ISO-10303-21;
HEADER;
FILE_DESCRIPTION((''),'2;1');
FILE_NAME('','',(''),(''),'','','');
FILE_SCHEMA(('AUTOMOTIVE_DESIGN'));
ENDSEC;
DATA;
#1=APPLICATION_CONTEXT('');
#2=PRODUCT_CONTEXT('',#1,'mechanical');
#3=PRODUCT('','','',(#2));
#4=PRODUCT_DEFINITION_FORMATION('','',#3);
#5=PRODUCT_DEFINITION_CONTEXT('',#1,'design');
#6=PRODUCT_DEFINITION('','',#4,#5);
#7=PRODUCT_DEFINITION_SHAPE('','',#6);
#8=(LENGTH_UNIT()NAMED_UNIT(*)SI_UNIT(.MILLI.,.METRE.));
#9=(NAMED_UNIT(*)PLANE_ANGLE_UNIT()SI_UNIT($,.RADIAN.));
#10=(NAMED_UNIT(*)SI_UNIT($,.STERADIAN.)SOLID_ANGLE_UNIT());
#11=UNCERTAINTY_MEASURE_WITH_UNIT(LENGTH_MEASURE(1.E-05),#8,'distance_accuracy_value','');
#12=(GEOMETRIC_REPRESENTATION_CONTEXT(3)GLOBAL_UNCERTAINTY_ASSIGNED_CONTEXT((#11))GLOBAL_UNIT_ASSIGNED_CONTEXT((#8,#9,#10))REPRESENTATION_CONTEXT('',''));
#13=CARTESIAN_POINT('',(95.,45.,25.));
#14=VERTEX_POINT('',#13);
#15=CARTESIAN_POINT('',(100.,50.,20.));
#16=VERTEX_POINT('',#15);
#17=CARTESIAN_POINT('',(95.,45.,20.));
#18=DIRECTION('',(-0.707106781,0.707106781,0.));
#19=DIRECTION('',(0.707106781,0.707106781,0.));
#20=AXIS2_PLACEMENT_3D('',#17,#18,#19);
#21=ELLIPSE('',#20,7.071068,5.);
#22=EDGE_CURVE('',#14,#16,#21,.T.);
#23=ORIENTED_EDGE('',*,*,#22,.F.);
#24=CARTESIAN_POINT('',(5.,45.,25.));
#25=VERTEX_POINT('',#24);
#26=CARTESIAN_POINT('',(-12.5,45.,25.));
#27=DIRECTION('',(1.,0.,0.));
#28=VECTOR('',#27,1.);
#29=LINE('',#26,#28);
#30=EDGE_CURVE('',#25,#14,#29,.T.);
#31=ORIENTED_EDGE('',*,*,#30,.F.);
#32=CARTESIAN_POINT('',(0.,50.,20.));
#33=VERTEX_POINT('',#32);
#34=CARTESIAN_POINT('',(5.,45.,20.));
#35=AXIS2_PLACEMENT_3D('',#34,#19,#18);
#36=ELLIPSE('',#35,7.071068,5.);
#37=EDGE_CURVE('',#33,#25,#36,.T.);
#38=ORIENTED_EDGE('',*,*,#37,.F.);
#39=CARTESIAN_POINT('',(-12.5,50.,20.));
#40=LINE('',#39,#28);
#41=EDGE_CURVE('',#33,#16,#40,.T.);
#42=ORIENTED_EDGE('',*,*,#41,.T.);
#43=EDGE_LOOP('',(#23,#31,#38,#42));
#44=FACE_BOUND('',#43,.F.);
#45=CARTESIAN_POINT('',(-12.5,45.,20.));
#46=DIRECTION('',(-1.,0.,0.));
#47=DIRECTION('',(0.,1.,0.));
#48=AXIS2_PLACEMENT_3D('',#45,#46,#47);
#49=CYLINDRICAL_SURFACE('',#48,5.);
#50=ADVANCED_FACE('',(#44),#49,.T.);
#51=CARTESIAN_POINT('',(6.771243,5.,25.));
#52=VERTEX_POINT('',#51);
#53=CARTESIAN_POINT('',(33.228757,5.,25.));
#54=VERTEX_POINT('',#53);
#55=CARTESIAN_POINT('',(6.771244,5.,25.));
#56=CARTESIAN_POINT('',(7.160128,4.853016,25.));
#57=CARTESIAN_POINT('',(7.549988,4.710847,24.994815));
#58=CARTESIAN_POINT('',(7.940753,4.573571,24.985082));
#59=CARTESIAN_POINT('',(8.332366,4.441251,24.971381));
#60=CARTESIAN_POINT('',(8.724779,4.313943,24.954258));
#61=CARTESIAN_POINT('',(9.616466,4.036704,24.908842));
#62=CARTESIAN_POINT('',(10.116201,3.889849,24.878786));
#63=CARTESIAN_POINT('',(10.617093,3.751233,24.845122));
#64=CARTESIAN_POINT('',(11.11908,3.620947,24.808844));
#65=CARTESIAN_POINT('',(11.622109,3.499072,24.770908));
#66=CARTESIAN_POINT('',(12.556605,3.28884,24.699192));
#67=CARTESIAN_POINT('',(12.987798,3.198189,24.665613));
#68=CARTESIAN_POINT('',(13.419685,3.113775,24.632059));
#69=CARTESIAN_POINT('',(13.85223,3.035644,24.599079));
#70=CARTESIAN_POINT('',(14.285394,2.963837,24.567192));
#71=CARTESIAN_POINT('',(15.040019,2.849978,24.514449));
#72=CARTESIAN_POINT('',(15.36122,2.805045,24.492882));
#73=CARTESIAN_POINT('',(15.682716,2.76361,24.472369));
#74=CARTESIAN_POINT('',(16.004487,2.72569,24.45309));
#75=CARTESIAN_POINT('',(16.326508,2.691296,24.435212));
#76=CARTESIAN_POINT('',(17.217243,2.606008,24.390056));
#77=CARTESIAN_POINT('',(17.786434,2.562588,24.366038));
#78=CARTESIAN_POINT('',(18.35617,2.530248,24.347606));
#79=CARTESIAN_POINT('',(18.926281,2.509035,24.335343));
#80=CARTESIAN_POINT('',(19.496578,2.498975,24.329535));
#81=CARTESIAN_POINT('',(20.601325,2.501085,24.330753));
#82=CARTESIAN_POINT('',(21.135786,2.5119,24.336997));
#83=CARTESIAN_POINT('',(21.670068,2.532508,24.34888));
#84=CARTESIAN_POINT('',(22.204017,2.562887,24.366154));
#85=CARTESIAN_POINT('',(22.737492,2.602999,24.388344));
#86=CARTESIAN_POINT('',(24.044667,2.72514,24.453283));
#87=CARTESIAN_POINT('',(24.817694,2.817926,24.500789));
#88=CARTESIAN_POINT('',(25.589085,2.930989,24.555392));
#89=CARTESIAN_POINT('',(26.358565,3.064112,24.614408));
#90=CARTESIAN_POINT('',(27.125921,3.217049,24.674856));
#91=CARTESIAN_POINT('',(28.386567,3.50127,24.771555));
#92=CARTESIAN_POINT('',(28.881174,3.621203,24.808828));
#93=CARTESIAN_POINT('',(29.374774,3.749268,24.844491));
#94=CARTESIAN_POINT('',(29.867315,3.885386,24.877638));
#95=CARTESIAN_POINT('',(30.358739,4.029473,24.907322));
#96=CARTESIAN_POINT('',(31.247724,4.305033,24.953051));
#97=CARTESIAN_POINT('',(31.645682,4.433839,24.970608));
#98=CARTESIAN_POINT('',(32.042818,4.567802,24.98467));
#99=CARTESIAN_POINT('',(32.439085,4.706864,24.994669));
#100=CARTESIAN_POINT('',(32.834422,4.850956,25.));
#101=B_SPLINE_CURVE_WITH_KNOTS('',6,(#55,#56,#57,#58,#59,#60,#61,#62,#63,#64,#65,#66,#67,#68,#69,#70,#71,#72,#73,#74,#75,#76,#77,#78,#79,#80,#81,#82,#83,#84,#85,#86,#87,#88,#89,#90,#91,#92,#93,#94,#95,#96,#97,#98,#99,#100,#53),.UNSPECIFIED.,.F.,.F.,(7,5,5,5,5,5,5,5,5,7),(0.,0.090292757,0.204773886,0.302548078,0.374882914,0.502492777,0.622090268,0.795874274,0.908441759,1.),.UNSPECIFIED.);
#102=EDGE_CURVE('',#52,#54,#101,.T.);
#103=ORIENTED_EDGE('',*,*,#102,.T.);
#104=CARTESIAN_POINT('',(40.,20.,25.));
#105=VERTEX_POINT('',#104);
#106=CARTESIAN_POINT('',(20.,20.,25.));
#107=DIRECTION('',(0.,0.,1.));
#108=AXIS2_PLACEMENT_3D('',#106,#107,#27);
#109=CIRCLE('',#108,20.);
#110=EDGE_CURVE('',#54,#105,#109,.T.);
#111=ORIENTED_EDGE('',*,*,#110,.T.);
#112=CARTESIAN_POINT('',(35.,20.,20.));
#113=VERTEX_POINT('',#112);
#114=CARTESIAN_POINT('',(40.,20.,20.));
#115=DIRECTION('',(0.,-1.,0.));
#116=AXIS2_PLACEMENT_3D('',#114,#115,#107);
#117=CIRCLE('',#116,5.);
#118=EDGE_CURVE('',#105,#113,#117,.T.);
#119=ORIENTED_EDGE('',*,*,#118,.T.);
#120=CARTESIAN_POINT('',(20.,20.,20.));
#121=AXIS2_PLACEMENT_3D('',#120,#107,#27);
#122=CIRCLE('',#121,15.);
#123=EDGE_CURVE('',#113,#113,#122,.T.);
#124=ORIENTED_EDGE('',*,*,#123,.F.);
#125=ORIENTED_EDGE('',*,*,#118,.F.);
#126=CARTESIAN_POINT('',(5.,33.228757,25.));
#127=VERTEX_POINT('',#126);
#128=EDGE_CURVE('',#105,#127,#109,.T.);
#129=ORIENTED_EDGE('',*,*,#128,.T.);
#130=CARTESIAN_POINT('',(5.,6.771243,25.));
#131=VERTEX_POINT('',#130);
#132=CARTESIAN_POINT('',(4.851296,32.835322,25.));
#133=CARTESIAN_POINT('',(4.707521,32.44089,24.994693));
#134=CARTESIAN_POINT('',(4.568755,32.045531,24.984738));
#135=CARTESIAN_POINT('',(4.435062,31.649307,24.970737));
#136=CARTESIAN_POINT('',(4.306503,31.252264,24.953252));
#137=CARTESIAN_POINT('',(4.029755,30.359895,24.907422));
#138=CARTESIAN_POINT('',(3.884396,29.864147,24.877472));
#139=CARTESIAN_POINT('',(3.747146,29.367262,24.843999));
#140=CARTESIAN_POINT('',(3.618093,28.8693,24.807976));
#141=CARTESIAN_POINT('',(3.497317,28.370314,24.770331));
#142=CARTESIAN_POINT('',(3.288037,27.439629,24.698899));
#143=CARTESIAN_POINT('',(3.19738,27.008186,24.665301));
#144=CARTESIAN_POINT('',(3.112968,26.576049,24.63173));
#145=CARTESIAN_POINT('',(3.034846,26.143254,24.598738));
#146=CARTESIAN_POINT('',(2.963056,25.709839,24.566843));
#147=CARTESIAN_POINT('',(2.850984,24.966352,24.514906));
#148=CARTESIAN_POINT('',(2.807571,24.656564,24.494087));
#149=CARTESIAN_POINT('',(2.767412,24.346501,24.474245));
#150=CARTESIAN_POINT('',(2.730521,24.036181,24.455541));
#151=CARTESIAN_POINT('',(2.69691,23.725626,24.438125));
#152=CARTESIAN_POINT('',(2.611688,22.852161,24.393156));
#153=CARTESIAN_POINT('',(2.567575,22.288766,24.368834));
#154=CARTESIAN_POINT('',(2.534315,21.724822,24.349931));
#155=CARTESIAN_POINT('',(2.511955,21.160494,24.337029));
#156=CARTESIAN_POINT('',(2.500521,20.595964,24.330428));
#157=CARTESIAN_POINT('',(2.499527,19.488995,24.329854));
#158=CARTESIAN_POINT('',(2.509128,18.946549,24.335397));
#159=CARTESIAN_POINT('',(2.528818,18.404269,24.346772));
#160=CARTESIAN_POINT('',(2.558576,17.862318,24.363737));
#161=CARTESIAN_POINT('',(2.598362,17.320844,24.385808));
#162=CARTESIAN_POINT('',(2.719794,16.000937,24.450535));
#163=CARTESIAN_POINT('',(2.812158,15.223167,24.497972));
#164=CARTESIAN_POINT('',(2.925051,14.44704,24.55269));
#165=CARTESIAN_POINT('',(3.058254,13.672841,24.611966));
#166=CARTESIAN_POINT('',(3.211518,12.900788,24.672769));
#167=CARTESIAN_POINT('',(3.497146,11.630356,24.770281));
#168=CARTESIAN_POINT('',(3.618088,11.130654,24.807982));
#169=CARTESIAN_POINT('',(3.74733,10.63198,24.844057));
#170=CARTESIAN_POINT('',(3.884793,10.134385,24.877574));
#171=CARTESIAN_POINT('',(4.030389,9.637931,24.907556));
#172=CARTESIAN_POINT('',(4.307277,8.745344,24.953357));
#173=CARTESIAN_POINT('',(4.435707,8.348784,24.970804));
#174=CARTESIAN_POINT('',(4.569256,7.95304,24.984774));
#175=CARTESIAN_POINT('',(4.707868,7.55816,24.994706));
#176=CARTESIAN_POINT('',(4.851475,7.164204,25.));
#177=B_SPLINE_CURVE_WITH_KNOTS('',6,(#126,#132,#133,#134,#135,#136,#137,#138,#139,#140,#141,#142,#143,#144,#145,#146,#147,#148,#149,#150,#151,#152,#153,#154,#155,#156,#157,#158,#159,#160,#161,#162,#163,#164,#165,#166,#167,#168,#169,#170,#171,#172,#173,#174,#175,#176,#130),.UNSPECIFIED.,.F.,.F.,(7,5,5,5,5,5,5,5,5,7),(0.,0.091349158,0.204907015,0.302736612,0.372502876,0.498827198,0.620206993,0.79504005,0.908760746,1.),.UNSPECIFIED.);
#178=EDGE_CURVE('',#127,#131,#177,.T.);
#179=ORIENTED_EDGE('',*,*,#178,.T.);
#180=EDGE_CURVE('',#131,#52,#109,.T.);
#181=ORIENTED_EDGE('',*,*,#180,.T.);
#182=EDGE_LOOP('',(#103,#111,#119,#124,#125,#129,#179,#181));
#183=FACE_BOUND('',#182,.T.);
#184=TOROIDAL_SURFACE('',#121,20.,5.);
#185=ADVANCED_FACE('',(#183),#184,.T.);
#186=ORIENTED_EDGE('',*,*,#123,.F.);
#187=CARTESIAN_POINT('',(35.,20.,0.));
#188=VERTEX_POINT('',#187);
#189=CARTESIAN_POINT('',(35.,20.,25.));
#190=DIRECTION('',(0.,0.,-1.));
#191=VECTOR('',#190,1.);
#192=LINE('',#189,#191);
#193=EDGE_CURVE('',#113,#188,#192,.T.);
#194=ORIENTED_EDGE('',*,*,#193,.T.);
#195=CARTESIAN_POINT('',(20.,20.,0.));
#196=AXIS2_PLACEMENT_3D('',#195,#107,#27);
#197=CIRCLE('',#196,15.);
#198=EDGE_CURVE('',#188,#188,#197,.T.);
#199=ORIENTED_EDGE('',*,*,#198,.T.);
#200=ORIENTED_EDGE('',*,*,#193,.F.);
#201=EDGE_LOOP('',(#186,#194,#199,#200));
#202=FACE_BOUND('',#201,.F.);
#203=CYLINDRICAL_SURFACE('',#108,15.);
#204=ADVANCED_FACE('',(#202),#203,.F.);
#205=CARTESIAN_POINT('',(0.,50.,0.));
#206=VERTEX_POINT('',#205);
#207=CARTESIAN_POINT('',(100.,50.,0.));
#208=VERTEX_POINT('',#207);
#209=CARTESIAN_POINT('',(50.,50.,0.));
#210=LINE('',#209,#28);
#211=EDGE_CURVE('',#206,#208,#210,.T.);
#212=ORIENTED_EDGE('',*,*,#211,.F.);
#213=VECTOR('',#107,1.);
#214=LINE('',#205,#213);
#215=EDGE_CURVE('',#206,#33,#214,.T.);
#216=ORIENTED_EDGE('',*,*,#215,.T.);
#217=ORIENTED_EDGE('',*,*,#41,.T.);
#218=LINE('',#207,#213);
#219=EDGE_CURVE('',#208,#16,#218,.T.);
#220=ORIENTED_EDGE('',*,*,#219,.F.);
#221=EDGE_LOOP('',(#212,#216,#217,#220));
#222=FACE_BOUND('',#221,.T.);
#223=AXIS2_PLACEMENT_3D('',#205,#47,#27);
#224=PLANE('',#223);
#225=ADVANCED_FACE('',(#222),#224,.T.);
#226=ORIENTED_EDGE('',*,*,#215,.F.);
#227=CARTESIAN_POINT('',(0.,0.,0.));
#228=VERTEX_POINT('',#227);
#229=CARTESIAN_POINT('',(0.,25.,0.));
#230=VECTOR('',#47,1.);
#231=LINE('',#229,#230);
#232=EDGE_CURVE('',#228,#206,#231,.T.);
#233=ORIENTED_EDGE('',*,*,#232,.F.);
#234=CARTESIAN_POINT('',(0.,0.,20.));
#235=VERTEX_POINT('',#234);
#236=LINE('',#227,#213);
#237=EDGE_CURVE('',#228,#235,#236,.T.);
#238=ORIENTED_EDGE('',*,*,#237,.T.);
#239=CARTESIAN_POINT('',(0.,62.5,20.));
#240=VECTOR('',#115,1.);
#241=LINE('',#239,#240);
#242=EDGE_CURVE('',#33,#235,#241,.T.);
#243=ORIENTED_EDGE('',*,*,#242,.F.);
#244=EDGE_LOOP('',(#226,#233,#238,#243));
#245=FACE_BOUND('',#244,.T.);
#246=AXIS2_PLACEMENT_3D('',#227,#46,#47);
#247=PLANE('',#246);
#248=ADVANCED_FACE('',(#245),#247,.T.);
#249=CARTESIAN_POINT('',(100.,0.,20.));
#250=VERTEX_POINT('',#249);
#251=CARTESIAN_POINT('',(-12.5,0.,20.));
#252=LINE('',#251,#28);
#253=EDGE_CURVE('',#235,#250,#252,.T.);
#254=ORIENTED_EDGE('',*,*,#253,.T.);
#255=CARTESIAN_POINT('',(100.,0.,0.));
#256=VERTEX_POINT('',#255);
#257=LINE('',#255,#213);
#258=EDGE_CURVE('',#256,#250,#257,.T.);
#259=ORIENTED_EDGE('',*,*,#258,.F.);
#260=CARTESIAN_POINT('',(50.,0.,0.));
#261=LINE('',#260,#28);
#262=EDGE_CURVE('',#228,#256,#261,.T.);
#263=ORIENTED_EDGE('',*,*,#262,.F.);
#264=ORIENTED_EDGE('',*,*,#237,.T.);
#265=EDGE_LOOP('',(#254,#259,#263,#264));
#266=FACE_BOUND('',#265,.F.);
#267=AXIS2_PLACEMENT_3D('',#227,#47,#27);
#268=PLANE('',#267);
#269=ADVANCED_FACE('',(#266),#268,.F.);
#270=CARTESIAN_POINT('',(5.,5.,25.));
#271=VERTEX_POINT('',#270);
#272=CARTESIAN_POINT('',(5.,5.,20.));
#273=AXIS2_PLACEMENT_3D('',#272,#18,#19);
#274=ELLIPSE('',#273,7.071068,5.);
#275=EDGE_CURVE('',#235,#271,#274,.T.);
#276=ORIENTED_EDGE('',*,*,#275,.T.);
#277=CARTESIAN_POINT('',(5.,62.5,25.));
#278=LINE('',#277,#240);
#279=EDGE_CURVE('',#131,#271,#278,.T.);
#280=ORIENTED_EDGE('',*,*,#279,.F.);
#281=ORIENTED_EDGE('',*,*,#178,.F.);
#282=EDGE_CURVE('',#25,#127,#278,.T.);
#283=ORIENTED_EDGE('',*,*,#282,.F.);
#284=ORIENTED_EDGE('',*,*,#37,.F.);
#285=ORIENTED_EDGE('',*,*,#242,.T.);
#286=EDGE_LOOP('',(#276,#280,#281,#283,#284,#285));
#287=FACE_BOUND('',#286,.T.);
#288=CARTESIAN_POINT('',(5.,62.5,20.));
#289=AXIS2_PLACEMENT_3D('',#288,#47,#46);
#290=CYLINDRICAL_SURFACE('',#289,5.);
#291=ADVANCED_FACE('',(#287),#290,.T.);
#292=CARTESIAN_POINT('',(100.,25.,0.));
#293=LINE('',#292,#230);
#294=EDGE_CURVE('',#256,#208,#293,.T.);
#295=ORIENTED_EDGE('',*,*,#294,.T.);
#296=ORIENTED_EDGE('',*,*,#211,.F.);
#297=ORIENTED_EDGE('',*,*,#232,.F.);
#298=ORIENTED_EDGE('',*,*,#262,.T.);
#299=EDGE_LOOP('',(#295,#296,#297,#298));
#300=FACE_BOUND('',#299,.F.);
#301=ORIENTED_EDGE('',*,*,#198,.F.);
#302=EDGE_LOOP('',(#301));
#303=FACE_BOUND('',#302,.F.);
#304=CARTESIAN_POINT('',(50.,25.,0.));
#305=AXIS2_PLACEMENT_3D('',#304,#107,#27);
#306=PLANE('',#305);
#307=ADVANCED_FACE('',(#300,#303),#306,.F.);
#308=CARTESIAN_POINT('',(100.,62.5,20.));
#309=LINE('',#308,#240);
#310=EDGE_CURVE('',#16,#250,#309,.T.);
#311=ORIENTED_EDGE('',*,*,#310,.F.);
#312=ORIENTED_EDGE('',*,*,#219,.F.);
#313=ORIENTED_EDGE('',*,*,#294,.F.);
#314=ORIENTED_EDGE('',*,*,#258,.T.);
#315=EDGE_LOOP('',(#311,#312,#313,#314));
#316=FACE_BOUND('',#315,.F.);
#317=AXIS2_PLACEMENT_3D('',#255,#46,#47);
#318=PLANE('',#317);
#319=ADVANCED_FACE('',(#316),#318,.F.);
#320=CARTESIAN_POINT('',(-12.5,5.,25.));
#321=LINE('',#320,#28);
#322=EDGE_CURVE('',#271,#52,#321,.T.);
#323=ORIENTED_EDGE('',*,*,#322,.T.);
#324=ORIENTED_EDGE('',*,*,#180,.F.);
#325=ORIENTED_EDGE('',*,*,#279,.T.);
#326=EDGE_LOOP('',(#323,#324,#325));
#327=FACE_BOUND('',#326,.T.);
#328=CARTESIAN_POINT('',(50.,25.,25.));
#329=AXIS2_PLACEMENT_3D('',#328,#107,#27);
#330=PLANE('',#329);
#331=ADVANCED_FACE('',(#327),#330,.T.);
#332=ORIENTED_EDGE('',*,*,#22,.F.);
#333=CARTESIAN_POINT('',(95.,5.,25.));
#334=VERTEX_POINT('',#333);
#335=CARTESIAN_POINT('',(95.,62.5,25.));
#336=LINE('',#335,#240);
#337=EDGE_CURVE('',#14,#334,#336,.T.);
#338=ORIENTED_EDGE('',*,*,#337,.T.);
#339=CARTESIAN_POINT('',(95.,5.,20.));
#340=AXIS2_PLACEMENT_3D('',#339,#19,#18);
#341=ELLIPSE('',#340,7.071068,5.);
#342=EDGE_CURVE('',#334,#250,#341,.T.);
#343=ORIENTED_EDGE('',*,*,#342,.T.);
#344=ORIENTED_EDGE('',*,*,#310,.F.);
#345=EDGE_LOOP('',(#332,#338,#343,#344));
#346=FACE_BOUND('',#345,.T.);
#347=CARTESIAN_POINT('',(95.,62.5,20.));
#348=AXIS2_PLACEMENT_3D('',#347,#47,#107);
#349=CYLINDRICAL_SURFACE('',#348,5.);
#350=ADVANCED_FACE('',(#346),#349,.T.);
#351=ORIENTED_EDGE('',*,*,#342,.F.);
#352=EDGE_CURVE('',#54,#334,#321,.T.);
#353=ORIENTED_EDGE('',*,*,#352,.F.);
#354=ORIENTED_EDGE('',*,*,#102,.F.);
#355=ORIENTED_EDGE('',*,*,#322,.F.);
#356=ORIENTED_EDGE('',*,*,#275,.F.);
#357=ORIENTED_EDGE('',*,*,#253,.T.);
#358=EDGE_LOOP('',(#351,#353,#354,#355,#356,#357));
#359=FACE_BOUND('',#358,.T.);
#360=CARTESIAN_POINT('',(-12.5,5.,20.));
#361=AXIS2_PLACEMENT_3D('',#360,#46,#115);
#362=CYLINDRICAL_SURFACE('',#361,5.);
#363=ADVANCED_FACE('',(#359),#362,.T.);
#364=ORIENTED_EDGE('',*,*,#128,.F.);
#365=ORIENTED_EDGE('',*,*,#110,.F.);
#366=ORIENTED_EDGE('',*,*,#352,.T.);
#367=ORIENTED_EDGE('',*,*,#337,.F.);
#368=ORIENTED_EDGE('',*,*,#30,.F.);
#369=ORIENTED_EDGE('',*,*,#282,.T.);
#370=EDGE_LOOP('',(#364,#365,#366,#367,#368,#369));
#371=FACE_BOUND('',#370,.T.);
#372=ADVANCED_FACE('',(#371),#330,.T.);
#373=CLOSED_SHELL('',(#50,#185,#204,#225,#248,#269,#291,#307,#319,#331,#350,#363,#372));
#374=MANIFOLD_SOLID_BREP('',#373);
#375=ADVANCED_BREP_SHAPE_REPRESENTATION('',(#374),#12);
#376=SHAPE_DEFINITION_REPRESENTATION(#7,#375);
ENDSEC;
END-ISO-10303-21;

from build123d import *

# Parameters (mm, degrees)
F0_W        = 100
F0_H        = 50
F1_DEPTH    = 25
F2_R        = 15
F3_DEPTH    = 25.001
F4_T1_DEPTH = 75
F4_T3_DEPTH = 125


# Not quite as in the source:
# - a fillet or chamfer that OpenCascade refuses, or shapes differently, is made with other operations: its cross-section is extruded or revolved along the edge and cut away or added


with BuildPart() as f1:
    # F0 (on Top) → F1 (new body)
    with BuildSketch(Plane.XY):
        with Locations((50, 25)):
            Rectangle(F0_W, F0_H)
    extrude(amount=F1_DEPTH)

    # F2 (on face) → F3 (cut, through all)
    with BuildSketch(Plane.XY.offset(25)):
        with Locations((20, 20)):
            Circle(F2_R)
    extrude(amount=-F3_DEPTH, mode=Mode.SUBTRACT)

    # F4: fillet of radius 5 on 5 edges, made by hand

    # F4_s2 → F4_t1 (cut)
    with BuildSketch(Plane.XZ.offset(-62.5)):
        with BuildLine():
            ThreePointArc((0, 20), (1.4644660941, 23.5355339059), (5, 25))
            Line((5, 25), (0, 25))
            Line((0, 25), (0, 20))
        make_face()
        with BuildLine():
            ThreePointArc((95, 25), (98.5355339059, 23.5355339059), (100, 20))
            Line((100, 20), (100, 25))
            Line((100, 25), (95, 25))
        make_face()
    extrude(amount=F4_T1_DEPTH, mode=Mode.SUBTRACT)

    # F4_s4 → F4_t3 (cut)
    with BuildSketch(Plane.YZ.offset(-12.5)):
        with BuildLine():
            ThreePointArc((50, 20), (48.5355339059, 23.5355339059), (45, 25))
            Line((45, 25), (50, 25))
            Line((50, 25), (50, 20))
        make_face()
        with BuildLine():
            ThreePointArc((0, 20), (1.4644660941, 23.5355339059), (5, 25))
            Line((5, 25), (0, 25))
            Line((0, 25), (0, 20))
        make_face()
    extrude(amount=F4_T3_DEPTH, mode=Mode.SUBTRACT)

    # F4_s5 → F4_t6 (revolve, cut)
    with BuildSketch(Plane.XZ.offset(-20)):
        with BuildLine():
            ThreePointArc((40, 25), (36.4644660941, 23.5355339059), (35, 20))
            Line((35, 20), (35, 25))
            Line((35, 25), (40, 25))
        make_face()
    revolve(axis=Axis((20, 20, 25), (0, 0, 1)), mode=Mode.SUBTRACT)


solid = f1.part
